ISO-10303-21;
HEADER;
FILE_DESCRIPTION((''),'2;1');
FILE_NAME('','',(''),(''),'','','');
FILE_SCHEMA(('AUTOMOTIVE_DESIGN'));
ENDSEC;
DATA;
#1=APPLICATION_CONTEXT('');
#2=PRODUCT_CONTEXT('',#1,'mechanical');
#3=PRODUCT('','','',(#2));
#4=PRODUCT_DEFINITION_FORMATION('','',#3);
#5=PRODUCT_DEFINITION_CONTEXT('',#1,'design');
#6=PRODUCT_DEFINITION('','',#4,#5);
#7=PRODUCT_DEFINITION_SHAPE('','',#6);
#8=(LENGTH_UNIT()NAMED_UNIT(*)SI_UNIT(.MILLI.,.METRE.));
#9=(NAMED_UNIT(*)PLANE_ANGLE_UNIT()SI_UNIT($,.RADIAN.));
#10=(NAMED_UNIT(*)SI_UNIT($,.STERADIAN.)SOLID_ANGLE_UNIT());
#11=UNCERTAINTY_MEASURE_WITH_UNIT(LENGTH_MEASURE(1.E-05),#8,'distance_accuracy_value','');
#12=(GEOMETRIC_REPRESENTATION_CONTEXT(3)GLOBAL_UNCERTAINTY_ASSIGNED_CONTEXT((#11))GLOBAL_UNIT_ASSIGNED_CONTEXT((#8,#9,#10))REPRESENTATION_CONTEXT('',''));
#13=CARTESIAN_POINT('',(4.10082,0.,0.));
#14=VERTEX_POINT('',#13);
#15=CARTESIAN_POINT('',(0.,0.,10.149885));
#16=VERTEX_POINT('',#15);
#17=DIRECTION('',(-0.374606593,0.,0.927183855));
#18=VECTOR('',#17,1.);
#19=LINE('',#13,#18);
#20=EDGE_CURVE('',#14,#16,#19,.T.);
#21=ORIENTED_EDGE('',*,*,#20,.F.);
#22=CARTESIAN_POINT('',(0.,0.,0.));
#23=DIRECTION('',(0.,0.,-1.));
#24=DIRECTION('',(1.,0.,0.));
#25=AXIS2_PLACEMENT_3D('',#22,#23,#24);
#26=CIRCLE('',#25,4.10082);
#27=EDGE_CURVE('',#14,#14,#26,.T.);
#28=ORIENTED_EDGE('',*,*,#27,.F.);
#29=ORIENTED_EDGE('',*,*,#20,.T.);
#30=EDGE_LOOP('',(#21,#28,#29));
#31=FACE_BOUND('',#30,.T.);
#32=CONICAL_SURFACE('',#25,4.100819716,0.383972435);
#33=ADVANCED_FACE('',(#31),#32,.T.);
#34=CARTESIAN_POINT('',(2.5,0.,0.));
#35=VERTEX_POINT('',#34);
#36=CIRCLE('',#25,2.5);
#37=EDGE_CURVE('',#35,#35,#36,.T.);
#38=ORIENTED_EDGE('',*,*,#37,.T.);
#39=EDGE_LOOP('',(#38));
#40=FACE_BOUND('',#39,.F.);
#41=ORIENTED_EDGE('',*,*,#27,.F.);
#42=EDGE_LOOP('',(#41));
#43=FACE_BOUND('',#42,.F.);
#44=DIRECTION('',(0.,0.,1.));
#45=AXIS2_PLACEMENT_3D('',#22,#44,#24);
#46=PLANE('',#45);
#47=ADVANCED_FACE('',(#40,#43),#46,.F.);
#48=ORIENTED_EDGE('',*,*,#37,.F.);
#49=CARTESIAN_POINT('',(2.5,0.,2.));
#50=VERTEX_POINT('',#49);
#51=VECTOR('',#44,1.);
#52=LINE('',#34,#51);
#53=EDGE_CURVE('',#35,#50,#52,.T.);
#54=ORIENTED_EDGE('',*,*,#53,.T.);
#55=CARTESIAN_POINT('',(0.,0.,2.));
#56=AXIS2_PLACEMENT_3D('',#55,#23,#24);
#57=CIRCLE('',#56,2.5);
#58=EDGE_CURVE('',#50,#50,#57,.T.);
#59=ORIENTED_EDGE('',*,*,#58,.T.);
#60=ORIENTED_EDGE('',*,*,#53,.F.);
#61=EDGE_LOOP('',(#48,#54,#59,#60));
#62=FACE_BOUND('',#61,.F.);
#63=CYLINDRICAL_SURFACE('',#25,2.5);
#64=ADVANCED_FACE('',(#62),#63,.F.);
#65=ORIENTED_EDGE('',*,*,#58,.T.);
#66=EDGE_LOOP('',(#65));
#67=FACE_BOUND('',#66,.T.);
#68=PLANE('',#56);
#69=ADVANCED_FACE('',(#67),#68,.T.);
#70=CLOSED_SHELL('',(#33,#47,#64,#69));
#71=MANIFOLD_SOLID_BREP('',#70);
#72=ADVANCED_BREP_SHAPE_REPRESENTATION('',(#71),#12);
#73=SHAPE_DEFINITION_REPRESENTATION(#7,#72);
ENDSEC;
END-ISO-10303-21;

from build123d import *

# Parameters (mm, degrees)
F0_R     = 4.1008197162
F1_DEPTH = 12
F1_TAPER = 22
F2_R     = 2.5
F3_DEPTH = 2


with BuildPart() as f1:
    # F0 (on Top) → F1 (new body)
    with BuildSketch(Plane.XY):
        Circle(F0_R)
    extrude(amount=F1_DEPTH, taper=F1_TAPER)

    # F2 (on face) → F3 (cut)
    with BuildSketch(Plane(origin=(0, 0, 0), x_dir=(1, 0, 0), z_dir=(0, 0, -1))):
        Circle(F2_R)
    extrude(amount=-F3_DEPTH, mode=Mode.SUBTRACT)


solid = f1.part
